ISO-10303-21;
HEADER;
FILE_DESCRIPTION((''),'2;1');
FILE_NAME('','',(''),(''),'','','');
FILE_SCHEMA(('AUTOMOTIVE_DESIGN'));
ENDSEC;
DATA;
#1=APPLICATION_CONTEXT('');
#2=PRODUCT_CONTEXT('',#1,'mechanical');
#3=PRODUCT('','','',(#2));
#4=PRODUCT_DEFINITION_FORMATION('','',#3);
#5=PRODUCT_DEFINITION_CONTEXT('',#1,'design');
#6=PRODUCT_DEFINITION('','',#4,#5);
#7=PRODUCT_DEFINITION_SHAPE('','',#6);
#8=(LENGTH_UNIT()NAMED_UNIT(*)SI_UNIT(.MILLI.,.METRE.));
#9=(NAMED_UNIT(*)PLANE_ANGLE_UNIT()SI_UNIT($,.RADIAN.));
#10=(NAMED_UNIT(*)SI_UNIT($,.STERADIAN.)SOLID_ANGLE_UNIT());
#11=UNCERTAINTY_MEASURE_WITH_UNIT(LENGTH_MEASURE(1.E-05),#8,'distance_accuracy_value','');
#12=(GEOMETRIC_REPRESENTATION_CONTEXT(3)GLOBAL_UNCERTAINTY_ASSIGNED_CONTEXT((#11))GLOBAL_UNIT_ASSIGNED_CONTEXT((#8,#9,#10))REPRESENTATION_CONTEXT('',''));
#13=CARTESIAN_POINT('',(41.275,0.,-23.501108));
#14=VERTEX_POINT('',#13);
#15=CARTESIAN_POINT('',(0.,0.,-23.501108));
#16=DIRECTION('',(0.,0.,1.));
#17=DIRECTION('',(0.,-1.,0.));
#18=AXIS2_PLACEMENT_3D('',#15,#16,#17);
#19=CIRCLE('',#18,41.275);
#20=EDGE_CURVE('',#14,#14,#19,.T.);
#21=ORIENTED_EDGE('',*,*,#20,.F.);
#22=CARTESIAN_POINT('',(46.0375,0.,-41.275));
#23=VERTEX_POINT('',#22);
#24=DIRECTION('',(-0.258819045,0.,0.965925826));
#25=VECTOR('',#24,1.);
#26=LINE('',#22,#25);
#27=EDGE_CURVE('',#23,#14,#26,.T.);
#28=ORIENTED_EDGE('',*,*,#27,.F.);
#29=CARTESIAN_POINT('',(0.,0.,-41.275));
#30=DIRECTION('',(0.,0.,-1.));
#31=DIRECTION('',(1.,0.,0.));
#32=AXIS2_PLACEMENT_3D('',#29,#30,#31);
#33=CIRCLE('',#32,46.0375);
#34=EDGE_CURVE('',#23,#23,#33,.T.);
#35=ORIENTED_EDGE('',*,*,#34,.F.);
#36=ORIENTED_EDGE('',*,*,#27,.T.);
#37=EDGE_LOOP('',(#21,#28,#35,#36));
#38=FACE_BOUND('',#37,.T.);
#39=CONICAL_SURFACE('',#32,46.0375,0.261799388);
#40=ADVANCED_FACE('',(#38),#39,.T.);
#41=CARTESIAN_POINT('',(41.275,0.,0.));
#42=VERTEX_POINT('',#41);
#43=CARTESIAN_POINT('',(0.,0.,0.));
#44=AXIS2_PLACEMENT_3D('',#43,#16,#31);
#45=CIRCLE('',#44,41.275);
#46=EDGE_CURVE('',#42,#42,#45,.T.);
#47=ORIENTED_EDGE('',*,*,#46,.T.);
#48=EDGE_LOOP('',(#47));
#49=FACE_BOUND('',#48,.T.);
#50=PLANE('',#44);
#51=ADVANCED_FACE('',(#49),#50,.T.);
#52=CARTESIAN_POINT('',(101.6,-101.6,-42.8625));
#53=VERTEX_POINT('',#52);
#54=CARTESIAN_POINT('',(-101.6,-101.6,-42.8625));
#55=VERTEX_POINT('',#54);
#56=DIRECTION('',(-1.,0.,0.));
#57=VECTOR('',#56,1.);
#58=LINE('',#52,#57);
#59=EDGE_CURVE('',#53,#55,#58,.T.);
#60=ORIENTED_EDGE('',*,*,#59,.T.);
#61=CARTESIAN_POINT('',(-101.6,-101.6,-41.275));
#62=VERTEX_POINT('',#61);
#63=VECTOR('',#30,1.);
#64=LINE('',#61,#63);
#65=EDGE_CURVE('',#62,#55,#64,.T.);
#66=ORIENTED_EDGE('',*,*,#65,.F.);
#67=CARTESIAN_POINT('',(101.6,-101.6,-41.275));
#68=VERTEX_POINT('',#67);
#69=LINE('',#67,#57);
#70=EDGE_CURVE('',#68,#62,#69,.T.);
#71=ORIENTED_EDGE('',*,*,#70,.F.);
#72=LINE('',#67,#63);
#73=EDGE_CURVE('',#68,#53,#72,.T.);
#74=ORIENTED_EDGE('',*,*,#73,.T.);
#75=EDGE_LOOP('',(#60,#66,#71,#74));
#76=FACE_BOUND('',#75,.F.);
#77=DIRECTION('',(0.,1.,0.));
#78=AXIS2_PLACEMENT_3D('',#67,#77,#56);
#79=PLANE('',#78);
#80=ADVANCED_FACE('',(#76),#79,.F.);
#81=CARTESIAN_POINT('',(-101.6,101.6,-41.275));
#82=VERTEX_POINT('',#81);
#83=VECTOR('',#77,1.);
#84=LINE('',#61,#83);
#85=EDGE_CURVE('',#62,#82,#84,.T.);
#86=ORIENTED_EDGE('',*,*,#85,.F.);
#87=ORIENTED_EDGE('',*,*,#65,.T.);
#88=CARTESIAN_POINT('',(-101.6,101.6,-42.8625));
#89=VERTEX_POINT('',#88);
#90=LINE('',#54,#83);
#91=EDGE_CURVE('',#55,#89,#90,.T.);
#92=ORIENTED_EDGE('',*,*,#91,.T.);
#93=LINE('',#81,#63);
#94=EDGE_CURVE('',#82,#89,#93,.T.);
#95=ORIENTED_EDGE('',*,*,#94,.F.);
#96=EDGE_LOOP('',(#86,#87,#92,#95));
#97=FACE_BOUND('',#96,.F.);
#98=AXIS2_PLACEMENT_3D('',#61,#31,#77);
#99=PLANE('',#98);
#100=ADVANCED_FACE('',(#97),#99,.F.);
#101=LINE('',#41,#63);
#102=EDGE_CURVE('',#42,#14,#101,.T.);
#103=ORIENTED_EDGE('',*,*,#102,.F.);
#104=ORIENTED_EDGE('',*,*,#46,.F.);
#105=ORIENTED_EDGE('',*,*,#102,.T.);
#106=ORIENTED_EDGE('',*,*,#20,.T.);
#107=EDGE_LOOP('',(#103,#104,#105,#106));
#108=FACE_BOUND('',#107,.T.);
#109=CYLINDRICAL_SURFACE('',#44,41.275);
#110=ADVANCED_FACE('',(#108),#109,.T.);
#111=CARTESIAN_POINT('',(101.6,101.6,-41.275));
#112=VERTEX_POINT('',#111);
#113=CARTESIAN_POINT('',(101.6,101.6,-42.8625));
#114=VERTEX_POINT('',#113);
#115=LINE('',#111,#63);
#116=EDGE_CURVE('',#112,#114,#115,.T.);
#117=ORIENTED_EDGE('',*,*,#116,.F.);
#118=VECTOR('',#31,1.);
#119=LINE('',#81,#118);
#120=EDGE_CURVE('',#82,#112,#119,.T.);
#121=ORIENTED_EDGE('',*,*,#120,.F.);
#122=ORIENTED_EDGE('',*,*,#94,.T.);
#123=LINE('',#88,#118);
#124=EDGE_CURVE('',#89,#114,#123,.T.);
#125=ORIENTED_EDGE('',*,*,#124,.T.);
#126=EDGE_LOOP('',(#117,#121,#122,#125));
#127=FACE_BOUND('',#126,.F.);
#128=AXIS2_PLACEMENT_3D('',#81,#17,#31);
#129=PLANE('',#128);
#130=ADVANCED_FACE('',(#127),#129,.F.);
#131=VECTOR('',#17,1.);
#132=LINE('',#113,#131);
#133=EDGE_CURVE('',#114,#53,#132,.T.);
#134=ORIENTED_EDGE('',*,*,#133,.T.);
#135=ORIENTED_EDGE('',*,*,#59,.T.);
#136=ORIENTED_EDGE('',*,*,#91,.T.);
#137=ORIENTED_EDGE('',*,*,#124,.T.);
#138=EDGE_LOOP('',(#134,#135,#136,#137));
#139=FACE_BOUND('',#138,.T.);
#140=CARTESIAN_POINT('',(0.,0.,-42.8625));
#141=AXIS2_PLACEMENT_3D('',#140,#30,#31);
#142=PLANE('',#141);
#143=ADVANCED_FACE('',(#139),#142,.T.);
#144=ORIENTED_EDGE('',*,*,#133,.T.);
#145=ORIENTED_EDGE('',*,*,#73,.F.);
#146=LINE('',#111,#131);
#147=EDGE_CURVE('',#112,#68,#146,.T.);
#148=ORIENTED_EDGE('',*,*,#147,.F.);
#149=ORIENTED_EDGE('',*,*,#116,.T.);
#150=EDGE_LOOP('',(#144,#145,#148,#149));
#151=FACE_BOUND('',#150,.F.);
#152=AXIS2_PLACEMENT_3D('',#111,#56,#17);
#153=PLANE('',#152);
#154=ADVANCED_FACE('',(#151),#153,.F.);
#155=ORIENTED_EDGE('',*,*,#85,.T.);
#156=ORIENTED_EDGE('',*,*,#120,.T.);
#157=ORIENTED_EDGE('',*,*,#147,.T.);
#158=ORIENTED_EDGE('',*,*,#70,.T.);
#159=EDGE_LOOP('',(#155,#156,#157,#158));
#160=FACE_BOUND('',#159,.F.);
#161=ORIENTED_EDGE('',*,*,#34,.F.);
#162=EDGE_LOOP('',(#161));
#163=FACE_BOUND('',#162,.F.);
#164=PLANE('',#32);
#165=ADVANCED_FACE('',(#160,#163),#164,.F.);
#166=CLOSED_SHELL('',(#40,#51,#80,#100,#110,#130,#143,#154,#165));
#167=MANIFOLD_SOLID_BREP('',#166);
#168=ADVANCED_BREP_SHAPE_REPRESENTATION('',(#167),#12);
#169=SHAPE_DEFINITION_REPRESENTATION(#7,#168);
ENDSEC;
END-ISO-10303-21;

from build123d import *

# Parameters (mm, degrees)
F2_R     = 46.0375
F3_DEPTH = 19.05
F3_TAPER = 15
F0_R     = 41.275
F4_DEPTH = 25.4
F5_R     = 46.0375
F6_DEPTH = 1.5875


with BuildPart() as f3:
    # F2 (on offset) → F3 (new body)
    with BuildSketch(Plane.XY.offset(-41.275)):
        Circle(F2_R)
    extrude(amount=F3_DEPTH, taper=F3_TAPER)

    # F0 (on Top) → F4 (join)
    with BuildSketch(Plane.XY):
        Circle(F0_R)
    extrude(amount=-F4_DEPTH)

    # F5 (on face) → F6 (join)
    with BuildSketch(Plane(origin=(0, 0, -41.275), x_dir=(1, 0, 0), z_dir=(0, 0, -1))):
        Polygon((101.6, -101.6), (101.6, 0), (101.6, 101.6), (-101.6, 101.6), (-101.6, -101.6), align=None)
        Circle(F5_R, mode=Mode.SUBTRACT)
        Circle(F5_R)
    extrude(amount=F6_DEPTH)


solid = f3.part
